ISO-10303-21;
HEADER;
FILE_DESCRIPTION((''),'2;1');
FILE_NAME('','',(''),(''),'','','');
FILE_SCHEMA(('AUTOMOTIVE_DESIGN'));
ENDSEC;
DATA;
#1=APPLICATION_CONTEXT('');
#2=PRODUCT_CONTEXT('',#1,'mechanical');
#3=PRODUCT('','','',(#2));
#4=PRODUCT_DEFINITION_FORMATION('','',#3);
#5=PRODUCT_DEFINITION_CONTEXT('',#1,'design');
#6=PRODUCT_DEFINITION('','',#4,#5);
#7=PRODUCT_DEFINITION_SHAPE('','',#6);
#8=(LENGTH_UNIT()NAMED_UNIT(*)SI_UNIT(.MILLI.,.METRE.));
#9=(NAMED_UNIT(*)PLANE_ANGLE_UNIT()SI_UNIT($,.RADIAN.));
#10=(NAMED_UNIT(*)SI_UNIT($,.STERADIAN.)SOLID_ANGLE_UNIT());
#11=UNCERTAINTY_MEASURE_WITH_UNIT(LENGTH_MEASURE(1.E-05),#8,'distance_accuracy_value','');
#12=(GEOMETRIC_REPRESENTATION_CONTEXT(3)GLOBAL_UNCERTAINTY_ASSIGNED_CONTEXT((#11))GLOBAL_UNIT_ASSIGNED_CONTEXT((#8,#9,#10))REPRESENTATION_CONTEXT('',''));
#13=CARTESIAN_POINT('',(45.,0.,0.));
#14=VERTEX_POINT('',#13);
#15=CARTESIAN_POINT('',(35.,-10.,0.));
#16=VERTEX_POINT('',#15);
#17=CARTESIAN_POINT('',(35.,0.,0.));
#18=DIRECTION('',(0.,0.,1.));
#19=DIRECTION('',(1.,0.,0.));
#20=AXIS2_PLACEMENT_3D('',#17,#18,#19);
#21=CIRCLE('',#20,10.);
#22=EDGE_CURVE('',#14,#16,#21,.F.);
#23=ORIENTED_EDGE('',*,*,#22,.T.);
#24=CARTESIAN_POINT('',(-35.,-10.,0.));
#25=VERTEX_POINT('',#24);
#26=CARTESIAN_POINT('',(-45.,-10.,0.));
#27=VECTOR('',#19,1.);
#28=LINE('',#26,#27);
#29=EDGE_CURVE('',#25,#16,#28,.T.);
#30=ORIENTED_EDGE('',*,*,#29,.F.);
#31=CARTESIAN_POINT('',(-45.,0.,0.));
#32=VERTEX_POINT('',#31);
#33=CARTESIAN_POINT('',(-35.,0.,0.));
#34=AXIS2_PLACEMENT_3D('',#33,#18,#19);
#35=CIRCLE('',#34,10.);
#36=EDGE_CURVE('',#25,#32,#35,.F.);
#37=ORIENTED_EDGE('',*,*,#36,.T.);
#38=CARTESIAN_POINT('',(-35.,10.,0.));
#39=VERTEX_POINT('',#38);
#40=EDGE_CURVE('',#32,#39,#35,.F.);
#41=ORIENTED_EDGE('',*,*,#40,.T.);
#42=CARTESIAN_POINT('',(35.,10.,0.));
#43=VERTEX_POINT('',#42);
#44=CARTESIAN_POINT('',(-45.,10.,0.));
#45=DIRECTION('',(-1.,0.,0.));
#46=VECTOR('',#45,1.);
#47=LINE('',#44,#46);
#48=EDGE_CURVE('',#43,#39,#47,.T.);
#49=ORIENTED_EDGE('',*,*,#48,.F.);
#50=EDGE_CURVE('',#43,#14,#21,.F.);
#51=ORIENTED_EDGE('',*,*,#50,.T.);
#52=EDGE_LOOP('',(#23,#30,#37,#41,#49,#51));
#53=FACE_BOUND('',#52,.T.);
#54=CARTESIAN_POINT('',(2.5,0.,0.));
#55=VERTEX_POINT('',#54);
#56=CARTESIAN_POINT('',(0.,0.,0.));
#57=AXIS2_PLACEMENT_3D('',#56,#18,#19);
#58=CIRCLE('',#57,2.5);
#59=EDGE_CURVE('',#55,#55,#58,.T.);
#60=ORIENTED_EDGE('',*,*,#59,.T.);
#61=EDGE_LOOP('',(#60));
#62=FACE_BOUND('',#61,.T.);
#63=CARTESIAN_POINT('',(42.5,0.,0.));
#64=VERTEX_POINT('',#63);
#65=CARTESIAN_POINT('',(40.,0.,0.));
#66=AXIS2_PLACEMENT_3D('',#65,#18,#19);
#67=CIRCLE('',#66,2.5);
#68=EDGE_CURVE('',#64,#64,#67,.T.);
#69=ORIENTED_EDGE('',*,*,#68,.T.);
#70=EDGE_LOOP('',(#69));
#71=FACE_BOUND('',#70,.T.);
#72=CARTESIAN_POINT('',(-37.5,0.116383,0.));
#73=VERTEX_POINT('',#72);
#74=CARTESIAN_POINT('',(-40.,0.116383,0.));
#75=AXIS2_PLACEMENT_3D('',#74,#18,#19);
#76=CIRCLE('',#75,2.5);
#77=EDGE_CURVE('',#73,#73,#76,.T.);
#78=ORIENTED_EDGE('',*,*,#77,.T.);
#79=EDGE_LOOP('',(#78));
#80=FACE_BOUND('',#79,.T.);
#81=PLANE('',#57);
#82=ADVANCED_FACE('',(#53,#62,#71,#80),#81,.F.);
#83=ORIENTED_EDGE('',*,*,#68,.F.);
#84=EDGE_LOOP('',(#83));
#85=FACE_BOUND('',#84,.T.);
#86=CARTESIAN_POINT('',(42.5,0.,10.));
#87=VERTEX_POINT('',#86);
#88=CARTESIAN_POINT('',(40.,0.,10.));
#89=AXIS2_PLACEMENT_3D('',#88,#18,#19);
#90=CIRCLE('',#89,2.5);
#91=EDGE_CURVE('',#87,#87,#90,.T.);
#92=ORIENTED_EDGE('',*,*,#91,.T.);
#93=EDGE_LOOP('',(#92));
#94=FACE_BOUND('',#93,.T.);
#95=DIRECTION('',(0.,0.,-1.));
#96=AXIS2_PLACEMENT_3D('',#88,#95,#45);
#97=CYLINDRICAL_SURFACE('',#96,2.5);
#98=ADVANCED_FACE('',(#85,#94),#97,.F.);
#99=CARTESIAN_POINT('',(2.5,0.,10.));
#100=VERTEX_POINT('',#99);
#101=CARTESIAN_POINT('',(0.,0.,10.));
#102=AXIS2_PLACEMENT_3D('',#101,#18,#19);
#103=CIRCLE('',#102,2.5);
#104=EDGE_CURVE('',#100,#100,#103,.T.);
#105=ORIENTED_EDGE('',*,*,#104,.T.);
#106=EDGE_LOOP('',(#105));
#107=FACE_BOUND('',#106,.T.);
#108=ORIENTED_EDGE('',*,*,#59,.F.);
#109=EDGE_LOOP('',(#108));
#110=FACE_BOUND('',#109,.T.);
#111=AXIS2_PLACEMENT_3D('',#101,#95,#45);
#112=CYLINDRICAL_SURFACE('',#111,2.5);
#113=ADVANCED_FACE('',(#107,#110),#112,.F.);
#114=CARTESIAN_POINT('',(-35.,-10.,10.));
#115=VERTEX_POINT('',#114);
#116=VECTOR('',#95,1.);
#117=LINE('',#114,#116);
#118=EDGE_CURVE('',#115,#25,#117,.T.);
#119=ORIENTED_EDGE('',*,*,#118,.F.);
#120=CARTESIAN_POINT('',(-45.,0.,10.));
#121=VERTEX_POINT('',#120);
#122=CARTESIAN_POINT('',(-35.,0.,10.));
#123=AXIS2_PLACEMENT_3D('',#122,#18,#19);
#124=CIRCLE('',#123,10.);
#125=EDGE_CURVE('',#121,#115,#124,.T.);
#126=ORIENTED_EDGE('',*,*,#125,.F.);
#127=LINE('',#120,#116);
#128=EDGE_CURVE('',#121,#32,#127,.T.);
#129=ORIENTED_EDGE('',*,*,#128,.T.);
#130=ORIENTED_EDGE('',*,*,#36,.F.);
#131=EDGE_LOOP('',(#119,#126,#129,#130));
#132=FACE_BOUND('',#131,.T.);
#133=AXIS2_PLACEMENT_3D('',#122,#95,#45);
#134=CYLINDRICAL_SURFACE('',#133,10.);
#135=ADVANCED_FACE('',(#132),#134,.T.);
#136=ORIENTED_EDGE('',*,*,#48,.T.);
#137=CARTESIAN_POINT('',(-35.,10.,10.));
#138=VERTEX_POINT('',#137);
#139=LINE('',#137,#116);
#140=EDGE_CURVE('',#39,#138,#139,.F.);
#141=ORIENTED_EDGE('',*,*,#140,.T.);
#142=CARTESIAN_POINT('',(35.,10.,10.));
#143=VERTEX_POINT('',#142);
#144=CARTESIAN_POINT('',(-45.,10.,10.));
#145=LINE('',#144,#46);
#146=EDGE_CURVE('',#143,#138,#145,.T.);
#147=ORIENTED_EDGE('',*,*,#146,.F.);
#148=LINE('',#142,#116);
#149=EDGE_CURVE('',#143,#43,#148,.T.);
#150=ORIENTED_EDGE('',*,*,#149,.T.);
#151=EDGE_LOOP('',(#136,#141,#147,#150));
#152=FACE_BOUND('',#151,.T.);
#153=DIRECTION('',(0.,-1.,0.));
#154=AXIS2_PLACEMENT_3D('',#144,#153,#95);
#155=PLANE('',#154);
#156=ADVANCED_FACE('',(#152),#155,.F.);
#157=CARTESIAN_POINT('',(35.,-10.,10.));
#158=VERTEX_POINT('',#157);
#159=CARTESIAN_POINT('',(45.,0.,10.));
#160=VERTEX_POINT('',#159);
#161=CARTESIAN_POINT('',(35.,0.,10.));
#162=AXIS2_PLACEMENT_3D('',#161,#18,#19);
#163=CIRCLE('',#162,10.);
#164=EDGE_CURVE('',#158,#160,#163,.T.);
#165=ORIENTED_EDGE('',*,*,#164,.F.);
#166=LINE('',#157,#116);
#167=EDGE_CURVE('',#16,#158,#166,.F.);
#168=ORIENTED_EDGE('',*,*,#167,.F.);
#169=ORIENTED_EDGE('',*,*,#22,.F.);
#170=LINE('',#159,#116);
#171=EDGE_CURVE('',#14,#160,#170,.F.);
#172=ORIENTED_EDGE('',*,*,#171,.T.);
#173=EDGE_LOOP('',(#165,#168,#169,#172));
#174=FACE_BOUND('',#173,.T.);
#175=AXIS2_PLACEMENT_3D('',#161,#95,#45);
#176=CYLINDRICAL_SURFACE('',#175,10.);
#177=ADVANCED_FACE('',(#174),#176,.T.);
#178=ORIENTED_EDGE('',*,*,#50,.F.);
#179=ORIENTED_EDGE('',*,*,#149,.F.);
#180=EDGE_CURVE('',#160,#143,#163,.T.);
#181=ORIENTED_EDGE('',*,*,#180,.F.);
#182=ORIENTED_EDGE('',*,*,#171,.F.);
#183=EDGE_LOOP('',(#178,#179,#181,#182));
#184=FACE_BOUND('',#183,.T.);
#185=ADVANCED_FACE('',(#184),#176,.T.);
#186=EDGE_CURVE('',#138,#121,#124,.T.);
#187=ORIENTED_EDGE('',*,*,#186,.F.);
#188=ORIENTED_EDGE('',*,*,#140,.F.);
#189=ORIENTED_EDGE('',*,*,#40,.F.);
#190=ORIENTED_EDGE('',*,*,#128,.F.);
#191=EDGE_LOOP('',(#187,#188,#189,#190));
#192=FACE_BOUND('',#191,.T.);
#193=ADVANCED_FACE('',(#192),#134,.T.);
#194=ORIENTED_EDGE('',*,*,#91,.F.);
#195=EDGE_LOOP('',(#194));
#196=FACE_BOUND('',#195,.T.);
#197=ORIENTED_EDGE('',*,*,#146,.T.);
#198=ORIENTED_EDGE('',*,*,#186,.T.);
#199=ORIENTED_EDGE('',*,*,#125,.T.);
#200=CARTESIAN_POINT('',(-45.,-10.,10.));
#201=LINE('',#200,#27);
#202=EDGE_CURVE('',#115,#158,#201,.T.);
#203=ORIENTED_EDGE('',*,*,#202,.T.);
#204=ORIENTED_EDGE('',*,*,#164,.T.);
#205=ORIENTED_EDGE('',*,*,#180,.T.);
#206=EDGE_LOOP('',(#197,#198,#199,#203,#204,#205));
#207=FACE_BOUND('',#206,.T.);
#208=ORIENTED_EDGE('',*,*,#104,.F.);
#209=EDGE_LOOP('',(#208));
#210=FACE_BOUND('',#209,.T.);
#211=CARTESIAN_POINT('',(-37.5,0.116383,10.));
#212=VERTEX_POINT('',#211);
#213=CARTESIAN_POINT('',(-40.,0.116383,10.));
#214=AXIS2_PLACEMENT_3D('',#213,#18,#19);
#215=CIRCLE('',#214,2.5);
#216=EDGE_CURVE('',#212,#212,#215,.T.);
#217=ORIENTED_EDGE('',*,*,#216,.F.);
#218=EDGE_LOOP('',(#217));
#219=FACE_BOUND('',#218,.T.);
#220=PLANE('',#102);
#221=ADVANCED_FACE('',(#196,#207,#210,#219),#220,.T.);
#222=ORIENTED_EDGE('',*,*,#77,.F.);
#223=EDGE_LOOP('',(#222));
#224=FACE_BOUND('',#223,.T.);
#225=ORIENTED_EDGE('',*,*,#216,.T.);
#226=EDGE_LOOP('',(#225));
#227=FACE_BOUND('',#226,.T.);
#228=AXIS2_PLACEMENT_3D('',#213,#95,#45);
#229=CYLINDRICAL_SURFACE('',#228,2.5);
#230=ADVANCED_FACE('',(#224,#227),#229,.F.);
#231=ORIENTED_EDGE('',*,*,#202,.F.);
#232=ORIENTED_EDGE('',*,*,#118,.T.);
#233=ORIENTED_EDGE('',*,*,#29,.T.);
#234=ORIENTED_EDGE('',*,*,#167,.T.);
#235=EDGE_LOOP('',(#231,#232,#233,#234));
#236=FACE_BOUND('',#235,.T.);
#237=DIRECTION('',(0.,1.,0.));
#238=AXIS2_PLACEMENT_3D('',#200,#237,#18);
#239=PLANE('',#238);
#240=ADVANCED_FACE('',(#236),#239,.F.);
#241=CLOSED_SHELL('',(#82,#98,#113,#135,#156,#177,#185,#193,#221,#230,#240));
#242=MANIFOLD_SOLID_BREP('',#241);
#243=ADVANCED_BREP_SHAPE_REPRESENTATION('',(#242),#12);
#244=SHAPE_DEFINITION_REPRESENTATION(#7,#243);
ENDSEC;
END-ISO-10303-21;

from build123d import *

# Parameters (mm, degrees)
SKETCH1_W           = 90
SKETCH1_H           = 20
SKETCH1_R           = 2.5
BOSS_EXTRUDE1_DEPTH = 10
FILLET1_R           = 10


with BuildPart() as part:
    # Sketch1 → Boss-Extrude1 (new body)
    with BuildSketch(Plane.XY):
        Rectangle(SKETCH1_W, SKETCH1_H)
        with Locations((-40, 0.116382556)):
            Circle(SKETCH1_R, mode=Mode.SUBTRACT)
        with Locations((40, 0)):
            Circle(SKETCH1_R, mode=Mode.SUBTRACT)
        Circle(SKETCH1_R, mode=Mode.SUBTRACT)
    extrude(amount=BOSS_EXTRUDE1_DEPTH)

    # Fillet1
    fillet1_edges = [part.edges().sort_by_distance(p)[0] for p in [
        (45, -10, 5),
        (45, 10, 5),
        (-45, -10, 5),
        (-45, 10, 5),
    ]]
    fillet(fillet1_edges, radius=FILLET1_R - 0.0001)  # a hair under: the kernel refuses the full size


solid = part.part
